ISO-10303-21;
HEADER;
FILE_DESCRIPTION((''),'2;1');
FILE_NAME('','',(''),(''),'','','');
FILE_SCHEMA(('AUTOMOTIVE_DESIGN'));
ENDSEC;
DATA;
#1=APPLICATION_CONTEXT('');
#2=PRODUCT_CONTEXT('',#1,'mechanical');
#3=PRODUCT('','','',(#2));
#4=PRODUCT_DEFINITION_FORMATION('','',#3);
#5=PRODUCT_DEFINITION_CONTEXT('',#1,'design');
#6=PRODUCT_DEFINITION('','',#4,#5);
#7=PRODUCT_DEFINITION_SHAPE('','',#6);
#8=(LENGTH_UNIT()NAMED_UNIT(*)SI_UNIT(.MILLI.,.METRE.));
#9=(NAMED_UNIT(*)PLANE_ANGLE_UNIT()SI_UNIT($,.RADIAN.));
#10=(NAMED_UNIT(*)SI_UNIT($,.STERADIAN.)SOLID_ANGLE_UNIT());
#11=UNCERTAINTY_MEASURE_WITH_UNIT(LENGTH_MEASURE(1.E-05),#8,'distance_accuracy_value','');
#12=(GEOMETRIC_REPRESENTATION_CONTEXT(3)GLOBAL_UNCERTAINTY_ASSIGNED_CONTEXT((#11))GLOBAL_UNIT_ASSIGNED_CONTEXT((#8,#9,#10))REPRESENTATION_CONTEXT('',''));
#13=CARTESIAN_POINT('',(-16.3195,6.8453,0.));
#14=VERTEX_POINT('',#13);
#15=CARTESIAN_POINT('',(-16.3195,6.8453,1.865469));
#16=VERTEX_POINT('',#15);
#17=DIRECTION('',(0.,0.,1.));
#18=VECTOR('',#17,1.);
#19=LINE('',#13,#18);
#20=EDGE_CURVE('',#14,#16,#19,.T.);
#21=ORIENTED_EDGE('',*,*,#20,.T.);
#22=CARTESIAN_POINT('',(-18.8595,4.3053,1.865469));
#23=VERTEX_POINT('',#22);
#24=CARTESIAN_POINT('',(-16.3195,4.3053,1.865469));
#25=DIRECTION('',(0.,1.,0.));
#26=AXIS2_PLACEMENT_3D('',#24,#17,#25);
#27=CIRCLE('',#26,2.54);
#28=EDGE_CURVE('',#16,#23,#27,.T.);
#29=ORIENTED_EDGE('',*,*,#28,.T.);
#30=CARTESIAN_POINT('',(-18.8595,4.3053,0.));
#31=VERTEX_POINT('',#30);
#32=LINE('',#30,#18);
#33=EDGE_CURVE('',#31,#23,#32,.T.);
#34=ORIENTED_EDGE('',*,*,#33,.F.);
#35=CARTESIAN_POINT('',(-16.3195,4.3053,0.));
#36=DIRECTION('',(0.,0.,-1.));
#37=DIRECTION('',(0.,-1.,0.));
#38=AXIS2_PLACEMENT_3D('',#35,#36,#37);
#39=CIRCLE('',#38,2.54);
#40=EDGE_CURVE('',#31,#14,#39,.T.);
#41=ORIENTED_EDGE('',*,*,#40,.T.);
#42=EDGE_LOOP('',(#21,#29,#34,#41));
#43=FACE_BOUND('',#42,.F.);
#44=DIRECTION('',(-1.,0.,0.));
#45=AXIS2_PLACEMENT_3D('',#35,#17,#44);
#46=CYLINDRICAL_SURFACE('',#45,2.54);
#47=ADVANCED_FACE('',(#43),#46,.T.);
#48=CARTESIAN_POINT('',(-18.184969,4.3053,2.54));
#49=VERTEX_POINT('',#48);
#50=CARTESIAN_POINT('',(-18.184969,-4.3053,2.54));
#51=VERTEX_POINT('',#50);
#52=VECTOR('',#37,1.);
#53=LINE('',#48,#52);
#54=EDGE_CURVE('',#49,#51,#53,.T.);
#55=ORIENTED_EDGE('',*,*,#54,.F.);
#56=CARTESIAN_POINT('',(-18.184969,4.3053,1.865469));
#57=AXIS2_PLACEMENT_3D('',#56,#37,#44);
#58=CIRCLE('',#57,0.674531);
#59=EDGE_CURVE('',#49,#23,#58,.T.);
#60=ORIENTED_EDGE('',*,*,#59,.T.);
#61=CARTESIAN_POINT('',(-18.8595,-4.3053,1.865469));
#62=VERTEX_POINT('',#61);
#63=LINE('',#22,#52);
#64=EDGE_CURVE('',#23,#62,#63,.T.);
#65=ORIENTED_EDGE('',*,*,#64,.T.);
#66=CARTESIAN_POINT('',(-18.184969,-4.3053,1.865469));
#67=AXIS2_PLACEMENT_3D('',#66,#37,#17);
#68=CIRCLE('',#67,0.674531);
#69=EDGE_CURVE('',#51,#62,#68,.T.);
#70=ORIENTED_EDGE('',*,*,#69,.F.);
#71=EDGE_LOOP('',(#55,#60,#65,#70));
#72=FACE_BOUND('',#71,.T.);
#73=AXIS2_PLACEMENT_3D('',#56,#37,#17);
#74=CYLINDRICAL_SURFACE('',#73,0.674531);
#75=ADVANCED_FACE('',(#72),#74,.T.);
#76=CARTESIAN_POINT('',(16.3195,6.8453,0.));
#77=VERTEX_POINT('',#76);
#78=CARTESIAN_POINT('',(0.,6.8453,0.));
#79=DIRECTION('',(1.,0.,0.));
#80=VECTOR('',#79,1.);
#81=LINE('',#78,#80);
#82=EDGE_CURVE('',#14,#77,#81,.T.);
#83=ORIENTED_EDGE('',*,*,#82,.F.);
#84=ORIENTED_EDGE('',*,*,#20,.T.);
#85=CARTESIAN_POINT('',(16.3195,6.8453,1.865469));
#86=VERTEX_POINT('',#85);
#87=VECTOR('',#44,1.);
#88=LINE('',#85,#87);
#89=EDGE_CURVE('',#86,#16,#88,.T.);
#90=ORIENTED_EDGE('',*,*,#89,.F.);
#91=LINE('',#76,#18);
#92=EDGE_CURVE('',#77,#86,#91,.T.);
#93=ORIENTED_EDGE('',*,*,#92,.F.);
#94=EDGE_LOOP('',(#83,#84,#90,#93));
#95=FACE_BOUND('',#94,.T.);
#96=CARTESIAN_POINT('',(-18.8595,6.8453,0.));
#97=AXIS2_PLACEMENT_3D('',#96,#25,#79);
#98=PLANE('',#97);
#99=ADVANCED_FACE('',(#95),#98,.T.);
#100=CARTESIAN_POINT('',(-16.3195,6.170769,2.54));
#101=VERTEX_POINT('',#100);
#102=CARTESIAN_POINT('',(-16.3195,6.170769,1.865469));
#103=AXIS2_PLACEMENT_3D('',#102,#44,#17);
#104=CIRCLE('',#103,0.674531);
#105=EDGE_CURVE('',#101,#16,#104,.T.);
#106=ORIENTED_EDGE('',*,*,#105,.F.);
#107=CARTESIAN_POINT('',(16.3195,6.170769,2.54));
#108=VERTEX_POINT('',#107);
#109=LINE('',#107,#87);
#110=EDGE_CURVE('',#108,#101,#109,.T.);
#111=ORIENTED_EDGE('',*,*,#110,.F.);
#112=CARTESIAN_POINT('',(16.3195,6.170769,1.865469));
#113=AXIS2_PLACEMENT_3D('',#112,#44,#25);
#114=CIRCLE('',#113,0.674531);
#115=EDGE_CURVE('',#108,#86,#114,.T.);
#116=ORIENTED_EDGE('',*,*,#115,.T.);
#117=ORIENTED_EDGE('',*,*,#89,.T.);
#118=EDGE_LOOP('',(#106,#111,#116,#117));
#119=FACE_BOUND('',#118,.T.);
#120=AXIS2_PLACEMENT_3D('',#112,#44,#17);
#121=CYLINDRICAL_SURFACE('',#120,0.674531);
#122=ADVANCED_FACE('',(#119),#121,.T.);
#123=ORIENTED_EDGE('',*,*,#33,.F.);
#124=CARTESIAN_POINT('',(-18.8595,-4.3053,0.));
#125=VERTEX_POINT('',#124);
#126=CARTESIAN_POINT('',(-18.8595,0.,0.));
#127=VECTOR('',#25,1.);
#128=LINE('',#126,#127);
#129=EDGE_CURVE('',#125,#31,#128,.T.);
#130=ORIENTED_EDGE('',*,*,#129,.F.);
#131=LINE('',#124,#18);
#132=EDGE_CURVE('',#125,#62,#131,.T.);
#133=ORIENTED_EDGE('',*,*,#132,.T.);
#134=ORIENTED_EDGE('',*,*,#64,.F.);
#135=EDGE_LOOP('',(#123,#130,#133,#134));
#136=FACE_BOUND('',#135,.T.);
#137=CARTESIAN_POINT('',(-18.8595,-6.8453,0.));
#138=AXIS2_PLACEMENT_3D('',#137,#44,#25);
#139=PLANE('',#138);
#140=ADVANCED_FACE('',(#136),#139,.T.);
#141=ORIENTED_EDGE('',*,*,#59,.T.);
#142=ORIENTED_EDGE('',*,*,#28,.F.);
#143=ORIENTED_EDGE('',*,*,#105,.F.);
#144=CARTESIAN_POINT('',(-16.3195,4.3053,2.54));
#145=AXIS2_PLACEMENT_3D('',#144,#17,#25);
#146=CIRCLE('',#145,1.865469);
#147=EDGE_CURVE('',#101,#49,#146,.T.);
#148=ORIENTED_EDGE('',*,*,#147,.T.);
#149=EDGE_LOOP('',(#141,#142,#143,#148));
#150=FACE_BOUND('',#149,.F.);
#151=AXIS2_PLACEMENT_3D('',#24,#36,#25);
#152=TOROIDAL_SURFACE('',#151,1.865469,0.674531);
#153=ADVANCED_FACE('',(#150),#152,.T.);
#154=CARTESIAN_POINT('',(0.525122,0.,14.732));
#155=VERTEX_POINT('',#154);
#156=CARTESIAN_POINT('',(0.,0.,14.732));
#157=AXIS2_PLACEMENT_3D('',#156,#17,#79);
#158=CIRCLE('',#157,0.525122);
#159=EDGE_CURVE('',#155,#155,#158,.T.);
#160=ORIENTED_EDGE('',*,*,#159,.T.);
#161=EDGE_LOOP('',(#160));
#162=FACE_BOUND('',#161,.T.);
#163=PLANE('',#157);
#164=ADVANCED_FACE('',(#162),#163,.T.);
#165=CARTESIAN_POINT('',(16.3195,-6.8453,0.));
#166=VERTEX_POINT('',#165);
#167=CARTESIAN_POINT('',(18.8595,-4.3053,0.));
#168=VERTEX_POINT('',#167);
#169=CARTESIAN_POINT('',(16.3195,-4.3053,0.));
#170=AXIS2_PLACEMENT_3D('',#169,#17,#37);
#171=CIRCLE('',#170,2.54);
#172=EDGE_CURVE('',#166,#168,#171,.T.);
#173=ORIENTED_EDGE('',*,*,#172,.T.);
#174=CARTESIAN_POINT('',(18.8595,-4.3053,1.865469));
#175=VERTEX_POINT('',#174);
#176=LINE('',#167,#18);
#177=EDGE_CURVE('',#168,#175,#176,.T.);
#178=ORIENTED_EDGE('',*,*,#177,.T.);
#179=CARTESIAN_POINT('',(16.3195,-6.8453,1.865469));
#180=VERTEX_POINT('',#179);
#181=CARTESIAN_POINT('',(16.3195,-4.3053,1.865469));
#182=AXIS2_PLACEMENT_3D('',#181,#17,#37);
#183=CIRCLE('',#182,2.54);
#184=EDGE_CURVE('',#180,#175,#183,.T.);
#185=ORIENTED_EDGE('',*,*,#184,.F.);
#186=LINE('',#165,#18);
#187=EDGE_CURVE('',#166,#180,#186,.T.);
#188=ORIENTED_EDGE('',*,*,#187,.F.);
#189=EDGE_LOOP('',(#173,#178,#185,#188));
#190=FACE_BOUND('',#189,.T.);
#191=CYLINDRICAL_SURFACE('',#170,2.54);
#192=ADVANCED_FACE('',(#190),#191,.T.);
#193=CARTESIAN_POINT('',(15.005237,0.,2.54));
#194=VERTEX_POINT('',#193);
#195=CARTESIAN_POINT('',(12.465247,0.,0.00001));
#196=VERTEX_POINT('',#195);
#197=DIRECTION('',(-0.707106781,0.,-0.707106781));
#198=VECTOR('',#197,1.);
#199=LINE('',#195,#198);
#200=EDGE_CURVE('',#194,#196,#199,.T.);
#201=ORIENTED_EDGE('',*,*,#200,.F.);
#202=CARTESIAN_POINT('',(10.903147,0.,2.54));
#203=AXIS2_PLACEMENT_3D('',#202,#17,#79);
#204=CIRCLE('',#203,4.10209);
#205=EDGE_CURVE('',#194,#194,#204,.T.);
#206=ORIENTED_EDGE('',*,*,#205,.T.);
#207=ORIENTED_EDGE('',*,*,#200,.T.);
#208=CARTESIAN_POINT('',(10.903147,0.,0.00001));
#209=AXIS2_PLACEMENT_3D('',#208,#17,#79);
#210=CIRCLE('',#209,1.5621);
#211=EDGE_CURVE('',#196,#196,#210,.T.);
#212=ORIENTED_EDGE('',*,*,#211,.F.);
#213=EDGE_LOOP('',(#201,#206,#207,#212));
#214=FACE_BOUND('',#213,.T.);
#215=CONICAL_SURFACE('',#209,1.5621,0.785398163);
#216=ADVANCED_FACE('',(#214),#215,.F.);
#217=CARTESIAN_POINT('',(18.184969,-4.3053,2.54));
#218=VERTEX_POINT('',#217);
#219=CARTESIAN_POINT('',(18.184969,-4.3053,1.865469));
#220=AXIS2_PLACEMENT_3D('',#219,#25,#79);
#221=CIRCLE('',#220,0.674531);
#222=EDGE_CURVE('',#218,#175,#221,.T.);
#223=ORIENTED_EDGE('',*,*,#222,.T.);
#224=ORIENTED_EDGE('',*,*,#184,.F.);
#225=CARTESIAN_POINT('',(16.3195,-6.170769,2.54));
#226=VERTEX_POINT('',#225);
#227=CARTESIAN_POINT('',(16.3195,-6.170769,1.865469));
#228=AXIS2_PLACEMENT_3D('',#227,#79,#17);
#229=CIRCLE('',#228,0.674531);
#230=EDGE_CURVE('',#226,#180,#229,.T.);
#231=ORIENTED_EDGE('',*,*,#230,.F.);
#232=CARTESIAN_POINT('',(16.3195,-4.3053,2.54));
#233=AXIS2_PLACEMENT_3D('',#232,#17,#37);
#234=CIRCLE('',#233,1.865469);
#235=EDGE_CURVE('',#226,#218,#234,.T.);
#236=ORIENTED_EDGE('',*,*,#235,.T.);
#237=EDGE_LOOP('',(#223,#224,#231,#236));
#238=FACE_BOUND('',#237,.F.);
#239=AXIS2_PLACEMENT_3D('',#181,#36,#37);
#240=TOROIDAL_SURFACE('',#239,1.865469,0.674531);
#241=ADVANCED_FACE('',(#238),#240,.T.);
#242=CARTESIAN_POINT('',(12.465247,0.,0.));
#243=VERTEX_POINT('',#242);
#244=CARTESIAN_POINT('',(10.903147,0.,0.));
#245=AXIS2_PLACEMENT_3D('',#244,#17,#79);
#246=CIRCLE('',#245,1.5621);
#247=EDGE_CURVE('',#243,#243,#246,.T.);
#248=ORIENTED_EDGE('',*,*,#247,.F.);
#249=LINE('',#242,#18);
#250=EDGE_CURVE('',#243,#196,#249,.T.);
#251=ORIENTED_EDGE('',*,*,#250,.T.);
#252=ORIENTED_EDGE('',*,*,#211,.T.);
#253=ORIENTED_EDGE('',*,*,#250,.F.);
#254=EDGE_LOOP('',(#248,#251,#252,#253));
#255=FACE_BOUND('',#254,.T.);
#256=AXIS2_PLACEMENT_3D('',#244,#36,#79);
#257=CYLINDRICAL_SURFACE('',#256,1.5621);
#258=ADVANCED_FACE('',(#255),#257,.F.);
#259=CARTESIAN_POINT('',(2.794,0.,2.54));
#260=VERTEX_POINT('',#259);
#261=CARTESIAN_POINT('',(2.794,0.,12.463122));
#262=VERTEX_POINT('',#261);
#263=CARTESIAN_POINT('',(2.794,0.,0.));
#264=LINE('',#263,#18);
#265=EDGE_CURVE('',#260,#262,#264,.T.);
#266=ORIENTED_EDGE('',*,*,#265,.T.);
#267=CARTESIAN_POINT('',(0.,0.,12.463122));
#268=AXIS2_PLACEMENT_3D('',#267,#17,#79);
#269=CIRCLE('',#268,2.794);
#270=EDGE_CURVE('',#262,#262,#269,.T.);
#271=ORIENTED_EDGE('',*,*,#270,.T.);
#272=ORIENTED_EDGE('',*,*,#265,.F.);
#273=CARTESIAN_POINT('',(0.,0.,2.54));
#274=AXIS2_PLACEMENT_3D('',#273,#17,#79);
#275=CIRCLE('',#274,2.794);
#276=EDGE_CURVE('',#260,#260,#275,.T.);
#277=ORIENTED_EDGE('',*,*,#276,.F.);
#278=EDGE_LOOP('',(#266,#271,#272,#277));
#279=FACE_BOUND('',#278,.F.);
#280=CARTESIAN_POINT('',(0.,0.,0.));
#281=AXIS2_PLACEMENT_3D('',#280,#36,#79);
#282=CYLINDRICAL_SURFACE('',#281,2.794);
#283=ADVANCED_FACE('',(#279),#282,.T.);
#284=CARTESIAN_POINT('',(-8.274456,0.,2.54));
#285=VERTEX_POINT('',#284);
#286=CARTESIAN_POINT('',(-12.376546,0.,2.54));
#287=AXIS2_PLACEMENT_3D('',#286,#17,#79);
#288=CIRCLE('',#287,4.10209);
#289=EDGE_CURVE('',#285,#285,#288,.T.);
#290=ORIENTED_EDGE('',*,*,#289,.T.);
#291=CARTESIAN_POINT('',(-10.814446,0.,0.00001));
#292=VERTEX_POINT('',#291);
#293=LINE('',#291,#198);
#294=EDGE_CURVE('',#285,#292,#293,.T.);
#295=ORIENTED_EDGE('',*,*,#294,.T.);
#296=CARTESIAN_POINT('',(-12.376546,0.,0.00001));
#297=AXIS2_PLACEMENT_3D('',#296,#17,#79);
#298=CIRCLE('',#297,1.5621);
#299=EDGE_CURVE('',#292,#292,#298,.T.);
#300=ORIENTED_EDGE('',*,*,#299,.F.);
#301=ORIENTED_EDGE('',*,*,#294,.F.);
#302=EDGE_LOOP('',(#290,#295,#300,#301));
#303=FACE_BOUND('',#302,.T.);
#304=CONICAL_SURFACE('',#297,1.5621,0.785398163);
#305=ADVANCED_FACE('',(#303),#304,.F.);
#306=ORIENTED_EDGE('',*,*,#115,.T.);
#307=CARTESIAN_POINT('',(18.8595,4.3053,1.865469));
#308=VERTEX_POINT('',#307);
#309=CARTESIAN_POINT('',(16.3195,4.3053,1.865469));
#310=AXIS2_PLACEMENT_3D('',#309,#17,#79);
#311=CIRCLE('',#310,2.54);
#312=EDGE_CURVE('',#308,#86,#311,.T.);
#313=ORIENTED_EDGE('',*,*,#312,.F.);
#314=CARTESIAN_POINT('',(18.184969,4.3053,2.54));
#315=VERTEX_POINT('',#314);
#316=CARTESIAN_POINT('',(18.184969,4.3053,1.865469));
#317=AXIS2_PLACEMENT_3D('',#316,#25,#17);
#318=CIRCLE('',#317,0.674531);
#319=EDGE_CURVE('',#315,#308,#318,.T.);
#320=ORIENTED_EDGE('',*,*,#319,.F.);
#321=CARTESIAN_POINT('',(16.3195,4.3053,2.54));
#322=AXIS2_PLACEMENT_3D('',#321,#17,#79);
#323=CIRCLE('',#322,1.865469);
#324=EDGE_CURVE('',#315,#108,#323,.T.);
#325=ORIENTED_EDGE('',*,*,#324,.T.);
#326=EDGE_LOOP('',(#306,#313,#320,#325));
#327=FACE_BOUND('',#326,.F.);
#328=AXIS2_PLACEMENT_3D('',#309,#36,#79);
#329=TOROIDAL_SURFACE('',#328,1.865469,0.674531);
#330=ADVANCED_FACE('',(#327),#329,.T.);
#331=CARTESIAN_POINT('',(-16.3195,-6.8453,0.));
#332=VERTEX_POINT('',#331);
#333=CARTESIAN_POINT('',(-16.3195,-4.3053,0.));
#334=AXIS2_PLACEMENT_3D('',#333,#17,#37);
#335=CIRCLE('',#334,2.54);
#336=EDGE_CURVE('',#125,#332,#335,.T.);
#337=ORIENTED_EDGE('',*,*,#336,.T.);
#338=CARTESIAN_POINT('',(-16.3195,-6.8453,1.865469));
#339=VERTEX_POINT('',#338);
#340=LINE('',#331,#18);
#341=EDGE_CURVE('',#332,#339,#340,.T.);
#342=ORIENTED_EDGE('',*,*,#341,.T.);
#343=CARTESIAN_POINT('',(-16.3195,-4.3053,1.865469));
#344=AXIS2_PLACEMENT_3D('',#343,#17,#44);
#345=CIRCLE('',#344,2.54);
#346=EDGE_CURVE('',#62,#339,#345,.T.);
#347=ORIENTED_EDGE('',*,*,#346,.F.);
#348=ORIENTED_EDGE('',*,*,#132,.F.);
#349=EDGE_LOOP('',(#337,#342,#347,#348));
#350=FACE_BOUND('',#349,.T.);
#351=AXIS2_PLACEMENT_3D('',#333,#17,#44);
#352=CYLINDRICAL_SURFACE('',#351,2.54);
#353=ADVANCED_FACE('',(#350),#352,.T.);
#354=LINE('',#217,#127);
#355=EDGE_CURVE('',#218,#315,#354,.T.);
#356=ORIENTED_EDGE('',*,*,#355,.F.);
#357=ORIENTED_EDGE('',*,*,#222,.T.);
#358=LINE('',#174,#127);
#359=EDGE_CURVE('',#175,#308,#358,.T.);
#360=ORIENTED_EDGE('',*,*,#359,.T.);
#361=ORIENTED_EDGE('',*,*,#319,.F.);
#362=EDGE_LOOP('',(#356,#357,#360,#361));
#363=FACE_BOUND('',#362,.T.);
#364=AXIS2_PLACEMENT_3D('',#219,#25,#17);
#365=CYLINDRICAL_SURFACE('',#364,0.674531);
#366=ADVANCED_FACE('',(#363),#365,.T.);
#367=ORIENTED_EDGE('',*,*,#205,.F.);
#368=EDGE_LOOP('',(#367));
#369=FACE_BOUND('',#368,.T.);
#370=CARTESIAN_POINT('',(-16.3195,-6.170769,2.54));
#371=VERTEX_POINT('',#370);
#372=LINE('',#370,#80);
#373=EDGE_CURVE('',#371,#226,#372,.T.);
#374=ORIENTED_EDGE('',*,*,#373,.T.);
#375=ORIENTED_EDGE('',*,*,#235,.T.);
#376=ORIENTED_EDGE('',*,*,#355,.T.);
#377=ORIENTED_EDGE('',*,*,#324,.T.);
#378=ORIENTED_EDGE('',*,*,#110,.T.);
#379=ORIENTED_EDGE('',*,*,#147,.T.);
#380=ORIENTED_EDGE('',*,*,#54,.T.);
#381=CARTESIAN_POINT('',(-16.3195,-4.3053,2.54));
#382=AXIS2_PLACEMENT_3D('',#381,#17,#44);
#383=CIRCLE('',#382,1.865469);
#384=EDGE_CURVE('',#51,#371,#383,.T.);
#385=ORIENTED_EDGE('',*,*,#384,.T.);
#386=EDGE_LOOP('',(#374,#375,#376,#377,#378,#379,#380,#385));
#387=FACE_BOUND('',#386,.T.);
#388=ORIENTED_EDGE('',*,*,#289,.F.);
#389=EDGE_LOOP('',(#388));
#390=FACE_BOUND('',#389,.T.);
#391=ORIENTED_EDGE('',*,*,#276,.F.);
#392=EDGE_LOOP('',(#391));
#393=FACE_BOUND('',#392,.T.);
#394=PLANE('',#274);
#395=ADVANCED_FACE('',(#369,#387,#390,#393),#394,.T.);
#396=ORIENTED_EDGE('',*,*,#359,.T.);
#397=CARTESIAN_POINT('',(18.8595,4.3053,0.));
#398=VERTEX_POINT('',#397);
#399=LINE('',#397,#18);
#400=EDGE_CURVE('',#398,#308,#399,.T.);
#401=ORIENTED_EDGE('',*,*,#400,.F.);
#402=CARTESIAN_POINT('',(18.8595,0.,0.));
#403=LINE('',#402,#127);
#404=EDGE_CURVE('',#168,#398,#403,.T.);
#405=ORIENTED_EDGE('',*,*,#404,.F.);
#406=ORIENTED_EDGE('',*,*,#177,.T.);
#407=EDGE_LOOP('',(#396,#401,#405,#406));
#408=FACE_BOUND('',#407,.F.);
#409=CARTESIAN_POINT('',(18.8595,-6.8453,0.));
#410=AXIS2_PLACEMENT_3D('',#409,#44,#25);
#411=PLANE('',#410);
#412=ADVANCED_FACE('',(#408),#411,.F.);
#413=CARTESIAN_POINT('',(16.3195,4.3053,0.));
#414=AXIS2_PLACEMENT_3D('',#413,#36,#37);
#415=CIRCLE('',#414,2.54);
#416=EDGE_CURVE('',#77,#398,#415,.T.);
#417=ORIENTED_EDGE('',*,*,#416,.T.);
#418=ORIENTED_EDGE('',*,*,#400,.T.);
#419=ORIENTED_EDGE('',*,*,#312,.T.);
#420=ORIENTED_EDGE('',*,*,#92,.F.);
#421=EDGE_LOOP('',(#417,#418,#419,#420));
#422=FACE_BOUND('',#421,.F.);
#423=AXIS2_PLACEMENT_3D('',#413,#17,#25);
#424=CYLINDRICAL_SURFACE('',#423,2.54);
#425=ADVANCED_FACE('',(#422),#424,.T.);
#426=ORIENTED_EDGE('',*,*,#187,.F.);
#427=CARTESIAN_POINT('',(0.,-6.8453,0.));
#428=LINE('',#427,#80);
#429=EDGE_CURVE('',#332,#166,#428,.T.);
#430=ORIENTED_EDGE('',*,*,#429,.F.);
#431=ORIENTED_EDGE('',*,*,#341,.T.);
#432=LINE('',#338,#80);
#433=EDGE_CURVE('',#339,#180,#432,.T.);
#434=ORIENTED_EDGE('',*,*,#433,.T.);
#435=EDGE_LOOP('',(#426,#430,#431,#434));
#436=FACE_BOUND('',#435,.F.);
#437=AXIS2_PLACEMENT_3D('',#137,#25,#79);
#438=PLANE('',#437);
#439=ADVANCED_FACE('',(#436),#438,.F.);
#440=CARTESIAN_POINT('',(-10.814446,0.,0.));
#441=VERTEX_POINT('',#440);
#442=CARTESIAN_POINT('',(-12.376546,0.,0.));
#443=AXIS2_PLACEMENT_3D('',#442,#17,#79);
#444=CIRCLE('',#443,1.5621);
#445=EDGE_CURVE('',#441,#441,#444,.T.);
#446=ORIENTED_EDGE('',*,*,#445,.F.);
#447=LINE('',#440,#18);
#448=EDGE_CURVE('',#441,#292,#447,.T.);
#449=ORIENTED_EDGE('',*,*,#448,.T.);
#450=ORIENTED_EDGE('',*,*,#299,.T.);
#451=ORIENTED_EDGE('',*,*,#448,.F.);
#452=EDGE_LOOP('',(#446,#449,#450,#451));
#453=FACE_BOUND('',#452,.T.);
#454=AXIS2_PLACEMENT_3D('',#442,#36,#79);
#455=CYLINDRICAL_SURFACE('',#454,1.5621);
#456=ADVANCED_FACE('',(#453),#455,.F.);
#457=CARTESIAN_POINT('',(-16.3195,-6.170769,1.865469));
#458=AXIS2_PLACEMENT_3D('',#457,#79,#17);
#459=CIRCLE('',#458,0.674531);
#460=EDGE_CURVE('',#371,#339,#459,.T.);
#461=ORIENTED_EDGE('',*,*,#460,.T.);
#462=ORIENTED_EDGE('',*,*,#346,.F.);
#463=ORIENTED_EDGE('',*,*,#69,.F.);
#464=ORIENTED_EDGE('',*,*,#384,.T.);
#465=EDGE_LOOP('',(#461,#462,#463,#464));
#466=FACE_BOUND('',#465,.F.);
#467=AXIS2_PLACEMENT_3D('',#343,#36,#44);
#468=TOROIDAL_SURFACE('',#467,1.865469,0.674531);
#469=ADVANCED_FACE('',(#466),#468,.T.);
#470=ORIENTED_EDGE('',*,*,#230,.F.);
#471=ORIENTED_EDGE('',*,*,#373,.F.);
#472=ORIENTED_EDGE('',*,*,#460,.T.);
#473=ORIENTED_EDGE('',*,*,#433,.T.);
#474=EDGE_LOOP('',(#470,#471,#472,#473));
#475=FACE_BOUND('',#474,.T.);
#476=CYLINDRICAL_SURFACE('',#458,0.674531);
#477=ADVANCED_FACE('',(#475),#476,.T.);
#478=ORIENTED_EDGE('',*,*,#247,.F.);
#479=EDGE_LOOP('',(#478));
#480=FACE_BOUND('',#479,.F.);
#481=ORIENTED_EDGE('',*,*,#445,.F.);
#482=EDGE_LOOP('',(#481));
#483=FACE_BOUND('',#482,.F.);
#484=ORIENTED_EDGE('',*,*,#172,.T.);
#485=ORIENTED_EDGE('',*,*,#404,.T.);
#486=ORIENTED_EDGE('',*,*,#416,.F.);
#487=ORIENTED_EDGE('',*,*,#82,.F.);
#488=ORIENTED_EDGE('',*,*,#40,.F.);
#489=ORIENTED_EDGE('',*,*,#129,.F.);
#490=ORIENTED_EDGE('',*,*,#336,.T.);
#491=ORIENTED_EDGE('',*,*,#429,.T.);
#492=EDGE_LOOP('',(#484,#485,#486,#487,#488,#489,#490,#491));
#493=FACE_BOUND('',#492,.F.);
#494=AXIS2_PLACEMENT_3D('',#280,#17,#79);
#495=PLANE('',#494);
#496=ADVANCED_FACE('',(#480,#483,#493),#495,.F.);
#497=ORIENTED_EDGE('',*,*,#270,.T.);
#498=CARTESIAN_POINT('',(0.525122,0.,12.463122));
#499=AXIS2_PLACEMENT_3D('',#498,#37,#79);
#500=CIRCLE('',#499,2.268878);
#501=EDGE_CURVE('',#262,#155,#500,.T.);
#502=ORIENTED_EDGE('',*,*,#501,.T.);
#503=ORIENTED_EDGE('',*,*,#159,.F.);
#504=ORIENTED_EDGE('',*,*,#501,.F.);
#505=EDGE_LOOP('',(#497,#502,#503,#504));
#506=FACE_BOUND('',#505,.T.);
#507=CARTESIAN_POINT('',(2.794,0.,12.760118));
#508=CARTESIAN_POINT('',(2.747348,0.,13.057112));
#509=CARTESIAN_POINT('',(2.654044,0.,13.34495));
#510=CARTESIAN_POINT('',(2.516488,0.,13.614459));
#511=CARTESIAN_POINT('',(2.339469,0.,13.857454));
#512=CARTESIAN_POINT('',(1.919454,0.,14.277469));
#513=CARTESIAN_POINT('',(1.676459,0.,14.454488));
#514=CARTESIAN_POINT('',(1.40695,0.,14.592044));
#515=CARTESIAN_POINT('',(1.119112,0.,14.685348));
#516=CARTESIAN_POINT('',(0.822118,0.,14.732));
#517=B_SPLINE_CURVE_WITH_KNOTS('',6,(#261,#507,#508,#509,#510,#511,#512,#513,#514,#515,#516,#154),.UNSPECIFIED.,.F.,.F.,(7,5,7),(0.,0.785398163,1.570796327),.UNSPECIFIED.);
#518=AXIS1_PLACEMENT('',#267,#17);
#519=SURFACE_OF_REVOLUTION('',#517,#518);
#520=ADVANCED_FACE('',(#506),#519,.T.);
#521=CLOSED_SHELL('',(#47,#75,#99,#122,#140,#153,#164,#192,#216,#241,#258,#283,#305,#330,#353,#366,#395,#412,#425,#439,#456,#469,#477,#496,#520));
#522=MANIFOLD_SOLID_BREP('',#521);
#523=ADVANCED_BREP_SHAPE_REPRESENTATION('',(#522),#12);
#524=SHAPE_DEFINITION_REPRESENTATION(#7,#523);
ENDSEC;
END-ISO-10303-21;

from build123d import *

# Parameters (mm, degrees)
F0_R     = 2.794
F1_DEPTH = 14.732
F0_W     = 37.719
F0_H     = 13.6906
F0_R_2   = 1.5621
F2_DEPTH = 2.54
F3_SIZE  = 2.53999
F4_R     = 2.54
F5_R     = 2.2688779059
F6_R     = 0.6745312693


# Not quite as in the source:
# - a fillet or chamfer is up to 0.001 mm smaller than in the source, because OpenCascade refuses the exact size


with BuildPart() as f1:
    # F0 (on Top) → F1 (new body)
    with BuildSketch(Plane.XY):
        Circle(F0_R)
    extrude(amount=F1_DEPTH)

    # F0 (on Top) → F2 (join)
    with BuildSketch(Plane.XY):
        Rectangle(F0_W, F0_H)
        with Locations((-12.3765456688, 0)):
            Circle(F0_R_2, mode=Mode.SUBTRACT)
        Circle(F0_R, mode=Mode.SUBTRACT)
        with Locations((10.9031473519, 0)):
            Circle(F0_R_2, mode=Mode.SUBTRACT)
    extrude(amount=F2_DEPTH)

    # F3 (size 2.54 in the source; OpenCascade refuses exactly that, so slightly less here)
    f3_edges = [f1.edges().sort_by_distance(p)[0] for p in [
        (-13.938646, 0, 2.54),
        (9.341047, 0, 2.54),
    ]]
    chamfer(f3_edges, length=F3_SIZE)

    # F4
    f4_edges = [f1.edges().sort_by_distance(p)[0] for p in [
        (18.8595, -6.8453, 1.27),
        (18.8595, 6.8453, 1.27),
        (-18.8595, -6.8453, 1.27),
        (-18.8595, 6.8453, 1.27),
    ]]
    fillet(f4_edges, radius=F4_R)

    # F5
    f5_edges = [f1.edges().sort_by_distance(p)[0] for p in [
        (-2.794, 0, 14.732),
    ]]
    fillet(f5_edges, radius=F5_R)

    # F6
    f6_edges = [f1.edges().sort_by_distance(p)[0] for p in [
        (0, -6.8453, 2.54),
        (18.115551, -6.101351, 2.54),
        (18.8595, 0, 2.54),
        (0, 6.8453, 2.54),
        (18.115551, 6.101351, 2.54),
        (-18.115551, 6.101351, 2.54),
        (-18.8595, 0, 2.54),
        (-18.115551, -6.101351, 2.54),
    ]]
    fillet(f6_edges, radius=F6_R)


solid = f1.part
